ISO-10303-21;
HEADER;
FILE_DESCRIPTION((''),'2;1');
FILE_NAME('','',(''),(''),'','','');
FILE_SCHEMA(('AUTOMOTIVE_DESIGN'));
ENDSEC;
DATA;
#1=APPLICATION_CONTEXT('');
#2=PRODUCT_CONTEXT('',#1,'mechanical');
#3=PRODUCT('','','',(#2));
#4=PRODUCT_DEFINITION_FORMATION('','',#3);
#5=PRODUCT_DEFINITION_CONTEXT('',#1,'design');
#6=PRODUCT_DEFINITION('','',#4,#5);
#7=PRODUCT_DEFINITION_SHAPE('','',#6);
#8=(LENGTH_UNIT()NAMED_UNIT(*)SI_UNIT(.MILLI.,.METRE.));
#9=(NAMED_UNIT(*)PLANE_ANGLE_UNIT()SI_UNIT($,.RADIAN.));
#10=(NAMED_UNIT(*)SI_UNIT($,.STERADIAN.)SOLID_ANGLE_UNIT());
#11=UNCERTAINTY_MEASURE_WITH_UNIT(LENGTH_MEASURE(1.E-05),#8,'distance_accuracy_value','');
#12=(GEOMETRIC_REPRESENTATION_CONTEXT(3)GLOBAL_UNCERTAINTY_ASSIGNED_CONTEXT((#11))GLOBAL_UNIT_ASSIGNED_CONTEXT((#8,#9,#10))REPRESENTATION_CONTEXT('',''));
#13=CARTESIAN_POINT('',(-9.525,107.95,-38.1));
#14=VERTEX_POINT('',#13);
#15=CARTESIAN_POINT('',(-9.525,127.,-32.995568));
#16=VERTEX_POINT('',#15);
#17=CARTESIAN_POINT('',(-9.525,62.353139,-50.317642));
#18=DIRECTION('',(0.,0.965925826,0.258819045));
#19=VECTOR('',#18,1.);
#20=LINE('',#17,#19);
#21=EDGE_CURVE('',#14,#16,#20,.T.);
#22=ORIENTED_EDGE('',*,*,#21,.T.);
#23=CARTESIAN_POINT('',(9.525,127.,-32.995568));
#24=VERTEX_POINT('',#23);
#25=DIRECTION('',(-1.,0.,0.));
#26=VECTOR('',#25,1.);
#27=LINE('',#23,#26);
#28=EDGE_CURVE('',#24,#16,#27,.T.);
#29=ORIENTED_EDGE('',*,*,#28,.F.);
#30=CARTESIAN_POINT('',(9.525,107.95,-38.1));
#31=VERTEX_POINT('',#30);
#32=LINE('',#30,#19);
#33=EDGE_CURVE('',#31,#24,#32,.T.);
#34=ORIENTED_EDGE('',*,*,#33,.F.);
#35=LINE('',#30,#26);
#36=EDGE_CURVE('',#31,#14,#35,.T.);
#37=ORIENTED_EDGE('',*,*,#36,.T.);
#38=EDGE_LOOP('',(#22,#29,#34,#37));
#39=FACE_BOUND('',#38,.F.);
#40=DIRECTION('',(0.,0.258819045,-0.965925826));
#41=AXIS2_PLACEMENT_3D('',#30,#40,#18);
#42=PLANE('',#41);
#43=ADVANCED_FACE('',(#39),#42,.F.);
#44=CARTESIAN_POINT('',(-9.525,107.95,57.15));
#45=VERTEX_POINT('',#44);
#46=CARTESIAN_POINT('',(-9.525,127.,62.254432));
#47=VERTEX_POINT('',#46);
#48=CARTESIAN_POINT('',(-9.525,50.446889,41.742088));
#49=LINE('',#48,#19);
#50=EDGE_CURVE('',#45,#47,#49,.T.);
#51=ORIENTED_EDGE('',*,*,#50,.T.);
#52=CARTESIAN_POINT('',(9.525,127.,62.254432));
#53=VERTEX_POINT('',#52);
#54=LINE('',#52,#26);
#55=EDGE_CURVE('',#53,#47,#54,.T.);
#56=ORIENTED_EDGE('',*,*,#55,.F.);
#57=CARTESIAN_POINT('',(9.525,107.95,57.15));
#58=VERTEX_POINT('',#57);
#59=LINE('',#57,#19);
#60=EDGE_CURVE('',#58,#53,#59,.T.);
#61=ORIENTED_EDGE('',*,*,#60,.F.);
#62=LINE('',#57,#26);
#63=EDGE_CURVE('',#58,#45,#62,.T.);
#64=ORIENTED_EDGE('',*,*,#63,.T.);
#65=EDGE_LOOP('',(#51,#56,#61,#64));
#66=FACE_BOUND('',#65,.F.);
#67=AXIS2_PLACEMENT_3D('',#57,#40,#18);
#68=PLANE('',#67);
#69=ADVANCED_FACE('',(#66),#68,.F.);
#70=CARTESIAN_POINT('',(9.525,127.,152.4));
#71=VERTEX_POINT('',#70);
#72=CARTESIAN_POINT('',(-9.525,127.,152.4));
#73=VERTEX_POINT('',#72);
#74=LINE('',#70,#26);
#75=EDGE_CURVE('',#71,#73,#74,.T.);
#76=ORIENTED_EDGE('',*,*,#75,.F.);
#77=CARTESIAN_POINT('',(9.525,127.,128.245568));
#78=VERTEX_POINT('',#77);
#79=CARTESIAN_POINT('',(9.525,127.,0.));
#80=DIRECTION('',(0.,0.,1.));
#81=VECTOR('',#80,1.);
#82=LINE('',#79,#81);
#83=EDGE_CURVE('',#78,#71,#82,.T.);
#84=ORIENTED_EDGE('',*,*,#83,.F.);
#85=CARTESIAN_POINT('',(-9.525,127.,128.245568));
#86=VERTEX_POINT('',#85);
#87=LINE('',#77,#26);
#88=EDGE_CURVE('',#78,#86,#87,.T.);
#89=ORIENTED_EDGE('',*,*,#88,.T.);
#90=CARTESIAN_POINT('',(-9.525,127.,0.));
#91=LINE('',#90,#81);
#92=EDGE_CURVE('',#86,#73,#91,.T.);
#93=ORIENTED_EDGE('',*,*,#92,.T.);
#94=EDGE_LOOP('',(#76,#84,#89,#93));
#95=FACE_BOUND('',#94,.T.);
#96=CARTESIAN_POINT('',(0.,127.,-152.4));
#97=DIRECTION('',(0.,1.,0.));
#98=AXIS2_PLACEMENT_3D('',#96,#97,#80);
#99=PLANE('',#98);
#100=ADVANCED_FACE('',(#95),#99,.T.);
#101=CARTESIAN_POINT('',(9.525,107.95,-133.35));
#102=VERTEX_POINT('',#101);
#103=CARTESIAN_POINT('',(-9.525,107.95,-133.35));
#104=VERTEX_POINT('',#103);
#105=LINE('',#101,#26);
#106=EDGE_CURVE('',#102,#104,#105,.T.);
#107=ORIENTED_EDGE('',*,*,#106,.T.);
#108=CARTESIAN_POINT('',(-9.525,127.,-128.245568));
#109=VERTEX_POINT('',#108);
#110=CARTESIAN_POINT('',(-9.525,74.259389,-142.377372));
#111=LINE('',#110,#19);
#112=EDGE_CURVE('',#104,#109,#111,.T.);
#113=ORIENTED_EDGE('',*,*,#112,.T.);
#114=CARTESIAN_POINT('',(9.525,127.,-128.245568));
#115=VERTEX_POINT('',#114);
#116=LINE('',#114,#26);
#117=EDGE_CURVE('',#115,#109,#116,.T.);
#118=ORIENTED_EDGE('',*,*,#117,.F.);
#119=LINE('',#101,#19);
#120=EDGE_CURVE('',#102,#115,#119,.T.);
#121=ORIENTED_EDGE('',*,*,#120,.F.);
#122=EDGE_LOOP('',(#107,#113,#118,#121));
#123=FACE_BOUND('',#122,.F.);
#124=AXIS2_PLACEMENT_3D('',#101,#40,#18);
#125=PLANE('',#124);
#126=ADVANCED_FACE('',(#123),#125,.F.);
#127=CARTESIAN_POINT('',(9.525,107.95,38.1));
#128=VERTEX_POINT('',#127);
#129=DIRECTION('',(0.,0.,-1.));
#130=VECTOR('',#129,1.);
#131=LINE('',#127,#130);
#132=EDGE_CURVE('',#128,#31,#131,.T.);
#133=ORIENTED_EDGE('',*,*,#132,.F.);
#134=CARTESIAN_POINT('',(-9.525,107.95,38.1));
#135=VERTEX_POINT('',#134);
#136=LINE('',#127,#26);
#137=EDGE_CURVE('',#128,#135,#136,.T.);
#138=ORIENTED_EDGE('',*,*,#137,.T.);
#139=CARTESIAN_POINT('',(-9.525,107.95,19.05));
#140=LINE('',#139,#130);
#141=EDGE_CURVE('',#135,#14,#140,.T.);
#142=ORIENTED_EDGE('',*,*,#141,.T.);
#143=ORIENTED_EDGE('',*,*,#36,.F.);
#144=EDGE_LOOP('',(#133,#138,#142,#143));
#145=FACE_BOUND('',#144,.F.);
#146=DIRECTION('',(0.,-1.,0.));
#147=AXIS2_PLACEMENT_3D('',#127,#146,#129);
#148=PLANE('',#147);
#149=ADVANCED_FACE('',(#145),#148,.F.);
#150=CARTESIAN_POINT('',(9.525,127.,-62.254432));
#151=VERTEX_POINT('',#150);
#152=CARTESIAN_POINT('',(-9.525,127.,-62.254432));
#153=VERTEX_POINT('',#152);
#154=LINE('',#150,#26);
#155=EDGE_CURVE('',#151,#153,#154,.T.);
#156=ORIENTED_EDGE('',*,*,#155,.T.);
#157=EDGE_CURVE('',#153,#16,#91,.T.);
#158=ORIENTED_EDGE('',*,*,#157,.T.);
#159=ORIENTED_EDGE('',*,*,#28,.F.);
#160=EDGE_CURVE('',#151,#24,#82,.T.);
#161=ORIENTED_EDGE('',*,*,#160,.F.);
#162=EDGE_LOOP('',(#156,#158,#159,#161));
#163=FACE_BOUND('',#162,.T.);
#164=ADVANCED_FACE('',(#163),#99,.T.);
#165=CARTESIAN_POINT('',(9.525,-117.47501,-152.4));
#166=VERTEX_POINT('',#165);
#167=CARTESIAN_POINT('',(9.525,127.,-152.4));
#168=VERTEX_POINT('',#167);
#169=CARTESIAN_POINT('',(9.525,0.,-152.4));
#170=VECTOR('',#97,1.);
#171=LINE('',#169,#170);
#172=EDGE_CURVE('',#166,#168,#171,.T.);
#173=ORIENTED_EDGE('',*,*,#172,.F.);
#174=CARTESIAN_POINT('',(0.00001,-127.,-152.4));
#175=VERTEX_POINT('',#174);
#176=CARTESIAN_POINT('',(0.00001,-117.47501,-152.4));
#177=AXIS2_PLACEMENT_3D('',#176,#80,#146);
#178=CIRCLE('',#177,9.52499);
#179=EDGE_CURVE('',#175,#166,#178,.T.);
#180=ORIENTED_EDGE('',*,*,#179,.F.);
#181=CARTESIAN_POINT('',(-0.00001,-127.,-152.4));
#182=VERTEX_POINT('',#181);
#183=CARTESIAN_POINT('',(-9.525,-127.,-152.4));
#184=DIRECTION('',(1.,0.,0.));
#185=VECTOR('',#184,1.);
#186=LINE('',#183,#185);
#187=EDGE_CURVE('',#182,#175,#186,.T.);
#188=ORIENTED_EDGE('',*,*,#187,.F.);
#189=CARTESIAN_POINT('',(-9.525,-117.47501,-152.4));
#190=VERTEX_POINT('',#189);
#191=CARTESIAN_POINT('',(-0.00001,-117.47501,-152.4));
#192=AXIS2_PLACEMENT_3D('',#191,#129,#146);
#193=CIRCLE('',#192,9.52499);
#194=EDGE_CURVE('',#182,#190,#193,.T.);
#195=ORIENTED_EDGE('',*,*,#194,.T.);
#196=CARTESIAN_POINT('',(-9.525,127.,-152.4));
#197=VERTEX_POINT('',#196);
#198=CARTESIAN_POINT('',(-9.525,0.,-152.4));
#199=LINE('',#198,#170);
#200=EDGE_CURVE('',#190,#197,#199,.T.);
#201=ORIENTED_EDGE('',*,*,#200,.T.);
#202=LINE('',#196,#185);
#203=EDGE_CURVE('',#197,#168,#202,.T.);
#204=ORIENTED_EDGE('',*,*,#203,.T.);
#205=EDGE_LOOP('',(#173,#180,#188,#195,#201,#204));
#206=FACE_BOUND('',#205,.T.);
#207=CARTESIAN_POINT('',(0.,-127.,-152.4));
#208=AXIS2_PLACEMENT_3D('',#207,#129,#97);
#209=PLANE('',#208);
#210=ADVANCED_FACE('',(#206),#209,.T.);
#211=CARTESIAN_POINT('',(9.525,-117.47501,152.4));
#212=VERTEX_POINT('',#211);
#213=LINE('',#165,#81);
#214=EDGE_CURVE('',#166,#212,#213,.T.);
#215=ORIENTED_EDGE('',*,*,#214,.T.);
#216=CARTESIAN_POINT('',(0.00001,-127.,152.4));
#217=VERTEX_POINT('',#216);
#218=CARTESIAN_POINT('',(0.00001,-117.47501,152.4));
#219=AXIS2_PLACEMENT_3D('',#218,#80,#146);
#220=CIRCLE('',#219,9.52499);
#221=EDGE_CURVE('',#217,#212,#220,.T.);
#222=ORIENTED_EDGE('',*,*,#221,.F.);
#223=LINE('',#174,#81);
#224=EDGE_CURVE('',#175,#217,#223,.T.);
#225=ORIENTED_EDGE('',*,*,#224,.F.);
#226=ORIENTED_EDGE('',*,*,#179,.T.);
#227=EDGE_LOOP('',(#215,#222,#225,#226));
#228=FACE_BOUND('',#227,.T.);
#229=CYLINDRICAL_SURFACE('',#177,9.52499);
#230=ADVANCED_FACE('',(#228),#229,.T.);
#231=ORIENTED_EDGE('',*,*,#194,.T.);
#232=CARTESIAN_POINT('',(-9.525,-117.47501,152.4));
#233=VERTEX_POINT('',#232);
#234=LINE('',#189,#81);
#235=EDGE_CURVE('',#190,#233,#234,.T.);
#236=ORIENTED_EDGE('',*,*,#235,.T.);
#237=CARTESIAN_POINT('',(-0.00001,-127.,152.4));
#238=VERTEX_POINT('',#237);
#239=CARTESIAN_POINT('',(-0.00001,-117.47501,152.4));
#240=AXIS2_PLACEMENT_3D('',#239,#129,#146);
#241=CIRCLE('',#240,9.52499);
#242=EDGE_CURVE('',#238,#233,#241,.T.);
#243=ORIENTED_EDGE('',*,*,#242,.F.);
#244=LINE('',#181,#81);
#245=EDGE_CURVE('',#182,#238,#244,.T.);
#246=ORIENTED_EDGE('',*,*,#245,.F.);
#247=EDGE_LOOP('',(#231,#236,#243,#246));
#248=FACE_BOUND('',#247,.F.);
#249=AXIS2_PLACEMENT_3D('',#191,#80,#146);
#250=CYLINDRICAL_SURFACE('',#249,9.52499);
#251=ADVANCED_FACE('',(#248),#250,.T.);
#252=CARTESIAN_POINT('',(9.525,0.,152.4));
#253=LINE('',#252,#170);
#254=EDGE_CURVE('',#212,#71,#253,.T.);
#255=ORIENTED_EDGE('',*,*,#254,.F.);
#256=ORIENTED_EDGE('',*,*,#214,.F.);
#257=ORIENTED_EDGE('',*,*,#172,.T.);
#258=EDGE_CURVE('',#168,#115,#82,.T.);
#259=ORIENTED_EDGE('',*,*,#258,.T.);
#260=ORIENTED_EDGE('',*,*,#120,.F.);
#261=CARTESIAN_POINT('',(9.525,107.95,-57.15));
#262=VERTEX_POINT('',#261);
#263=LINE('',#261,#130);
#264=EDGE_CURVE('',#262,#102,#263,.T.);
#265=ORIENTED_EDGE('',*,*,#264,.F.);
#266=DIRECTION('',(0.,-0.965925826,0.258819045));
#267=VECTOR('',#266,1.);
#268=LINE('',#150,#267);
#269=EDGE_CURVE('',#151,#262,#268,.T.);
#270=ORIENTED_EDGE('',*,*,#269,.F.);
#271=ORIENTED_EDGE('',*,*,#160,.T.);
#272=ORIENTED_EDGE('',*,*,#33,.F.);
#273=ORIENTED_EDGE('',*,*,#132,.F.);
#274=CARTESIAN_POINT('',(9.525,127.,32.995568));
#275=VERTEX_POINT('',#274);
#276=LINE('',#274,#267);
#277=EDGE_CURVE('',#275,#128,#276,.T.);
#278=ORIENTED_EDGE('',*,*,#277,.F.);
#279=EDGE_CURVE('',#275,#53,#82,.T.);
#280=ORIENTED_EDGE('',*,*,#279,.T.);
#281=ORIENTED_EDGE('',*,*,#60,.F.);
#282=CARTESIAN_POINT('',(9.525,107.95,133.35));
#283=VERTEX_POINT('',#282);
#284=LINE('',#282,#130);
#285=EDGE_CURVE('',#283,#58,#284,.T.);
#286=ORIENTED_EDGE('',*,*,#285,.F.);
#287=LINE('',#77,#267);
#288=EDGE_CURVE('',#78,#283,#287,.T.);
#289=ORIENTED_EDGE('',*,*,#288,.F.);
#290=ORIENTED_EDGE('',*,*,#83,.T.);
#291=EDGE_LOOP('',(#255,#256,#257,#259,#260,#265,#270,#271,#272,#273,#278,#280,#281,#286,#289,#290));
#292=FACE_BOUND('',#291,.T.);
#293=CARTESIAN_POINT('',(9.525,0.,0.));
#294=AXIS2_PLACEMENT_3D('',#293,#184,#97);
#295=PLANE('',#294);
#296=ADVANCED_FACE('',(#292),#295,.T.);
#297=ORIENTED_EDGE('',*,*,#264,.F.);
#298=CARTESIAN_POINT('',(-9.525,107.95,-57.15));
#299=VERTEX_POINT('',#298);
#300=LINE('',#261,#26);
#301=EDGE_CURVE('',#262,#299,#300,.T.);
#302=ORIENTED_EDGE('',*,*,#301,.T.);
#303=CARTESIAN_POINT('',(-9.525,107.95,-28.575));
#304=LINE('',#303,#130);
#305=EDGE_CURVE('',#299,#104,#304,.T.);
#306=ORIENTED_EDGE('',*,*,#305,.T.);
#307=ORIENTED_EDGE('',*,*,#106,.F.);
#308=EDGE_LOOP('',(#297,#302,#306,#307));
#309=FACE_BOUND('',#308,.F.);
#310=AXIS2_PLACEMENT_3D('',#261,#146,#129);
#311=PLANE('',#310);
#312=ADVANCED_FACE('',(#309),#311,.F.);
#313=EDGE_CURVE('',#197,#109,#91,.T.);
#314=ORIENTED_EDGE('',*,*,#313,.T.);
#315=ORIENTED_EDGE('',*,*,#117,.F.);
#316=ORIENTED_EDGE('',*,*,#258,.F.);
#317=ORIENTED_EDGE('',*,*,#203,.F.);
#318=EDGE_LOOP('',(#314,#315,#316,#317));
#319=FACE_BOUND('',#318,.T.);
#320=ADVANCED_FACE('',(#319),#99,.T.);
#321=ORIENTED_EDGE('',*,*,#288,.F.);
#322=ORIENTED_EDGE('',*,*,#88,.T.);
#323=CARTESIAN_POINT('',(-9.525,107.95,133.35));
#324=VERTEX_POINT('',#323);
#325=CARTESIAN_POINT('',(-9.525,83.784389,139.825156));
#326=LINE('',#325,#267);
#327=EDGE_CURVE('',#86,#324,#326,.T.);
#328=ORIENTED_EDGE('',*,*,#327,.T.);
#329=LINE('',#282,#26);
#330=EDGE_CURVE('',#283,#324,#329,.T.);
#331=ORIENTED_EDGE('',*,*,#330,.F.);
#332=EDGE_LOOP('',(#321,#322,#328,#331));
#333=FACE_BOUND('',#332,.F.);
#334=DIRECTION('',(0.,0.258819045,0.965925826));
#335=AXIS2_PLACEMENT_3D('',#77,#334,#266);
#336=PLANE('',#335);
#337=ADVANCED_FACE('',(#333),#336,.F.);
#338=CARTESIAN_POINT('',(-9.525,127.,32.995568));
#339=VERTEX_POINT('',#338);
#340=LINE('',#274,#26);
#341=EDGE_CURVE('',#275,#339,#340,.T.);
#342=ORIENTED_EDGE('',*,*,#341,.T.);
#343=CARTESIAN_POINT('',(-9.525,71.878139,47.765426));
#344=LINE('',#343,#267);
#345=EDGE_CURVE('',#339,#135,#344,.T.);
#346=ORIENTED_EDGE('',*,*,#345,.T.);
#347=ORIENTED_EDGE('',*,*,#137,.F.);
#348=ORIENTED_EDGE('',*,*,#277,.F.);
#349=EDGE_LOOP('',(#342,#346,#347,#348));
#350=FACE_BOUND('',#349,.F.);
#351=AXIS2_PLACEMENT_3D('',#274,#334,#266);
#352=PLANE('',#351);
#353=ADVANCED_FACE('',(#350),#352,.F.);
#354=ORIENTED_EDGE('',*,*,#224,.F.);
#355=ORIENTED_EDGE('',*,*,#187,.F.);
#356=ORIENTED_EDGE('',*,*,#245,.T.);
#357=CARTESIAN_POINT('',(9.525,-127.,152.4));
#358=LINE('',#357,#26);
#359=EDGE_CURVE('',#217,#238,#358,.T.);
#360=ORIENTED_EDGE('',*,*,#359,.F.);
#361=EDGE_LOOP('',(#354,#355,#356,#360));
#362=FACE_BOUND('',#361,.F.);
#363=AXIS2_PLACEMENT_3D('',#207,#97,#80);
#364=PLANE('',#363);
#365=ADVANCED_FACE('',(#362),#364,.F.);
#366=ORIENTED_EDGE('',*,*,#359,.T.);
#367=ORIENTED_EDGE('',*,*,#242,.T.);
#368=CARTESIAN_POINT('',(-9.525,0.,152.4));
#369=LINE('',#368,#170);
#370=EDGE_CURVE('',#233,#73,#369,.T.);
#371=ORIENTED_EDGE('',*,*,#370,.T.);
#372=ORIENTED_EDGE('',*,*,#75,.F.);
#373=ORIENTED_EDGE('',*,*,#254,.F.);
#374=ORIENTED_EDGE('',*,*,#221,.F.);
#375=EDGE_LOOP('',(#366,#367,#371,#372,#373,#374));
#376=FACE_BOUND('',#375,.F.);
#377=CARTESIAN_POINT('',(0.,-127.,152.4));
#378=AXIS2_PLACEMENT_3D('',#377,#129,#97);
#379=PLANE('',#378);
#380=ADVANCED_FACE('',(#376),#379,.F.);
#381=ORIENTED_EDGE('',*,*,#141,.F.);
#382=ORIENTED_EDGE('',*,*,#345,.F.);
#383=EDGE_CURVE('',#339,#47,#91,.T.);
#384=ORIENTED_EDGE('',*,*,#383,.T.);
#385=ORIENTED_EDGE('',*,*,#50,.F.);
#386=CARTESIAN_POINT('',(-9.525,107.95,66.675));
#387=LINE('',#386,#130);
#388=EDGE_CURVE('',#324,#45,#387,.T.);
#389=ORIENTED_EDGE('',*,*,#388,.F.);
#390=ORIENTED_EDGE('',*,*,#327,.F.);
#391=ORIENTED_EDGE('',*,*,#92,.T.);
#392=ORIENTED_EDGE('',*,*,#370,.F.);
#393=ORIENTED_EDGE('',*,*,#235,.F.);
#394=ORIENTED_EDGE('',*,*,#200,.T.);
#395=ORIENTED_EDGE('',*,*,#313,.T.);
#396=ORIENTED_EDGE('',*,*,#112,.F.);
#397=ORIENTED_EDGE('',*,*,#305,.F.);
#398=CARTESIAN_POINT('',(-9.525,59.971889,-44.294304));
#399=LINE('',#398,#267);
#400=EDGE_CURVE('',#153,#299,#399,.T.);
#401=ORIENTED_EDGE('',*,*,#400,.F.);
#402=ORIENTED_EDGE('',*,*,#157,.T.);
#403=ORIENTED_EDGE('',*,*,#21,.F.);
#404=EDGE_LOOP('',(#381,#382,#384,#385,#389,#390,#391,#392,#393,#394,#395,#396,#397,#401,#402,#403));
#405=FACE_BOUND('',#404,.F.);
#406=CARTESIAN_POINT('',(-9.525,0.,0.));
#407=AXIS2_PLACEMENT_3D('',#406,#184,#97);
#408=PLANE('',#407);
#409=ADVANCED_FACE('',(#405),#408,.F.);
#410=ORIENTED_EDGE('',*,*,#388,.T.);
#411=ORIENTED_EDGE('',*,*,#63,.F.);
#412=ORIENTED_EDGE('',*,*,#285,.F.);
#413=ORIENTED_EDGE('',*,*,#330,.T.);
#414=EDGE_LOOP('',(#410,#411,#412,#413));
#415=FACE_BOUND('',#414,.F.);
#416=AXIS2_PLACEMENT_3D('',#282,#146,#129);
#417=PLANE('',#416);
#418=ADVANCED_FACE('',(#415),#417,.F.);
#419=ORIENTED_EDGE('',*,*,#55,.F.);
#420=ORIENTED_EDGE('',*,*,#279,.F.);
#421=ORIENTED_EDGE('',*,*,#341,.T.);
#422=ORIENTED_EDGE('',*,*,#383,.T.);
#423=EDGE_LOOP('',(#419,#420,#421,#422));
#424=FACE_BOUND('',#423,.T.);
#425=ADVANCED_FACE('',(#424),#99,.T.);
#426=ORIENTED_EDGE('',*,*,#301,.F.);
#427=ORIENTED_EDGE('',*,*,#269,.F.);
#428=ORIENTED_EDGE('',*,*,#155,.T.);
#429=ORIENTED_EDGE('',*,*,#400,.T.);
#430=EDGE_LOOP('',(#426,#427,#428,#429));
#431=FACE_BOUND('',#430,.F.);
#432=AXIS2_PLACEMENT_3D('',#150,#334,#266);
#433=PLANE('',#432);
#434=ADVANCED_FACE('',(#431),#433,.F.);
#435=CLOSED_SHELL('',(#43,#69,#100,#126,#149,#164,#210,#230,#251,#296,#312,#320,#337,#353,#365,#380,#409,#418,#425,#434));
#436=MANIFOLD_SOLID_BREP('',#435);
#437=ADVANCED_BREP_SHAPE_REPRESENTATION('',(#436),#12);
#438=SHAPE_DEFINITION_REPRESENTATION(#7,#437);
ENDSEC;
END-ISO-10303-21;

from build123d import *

# Parameters (mm, degrees)
F0_W     = 254
F0_H     = 304.8
F1_DEPTH = 9.525
F2_R     = 9.52499
F4_DEPTH = 19.051


# Not quite as in the source:
# - a fillet or chamfer is up to 0.001 mm smaller than in the source, because OpenCascade refuses the exact size
# - a feature names something its author has since deleted; it is built from what else it names


with BuildPart() as f1:
    # F0 (on Right) → F1 (new body, symmetric)
    with BuildSketch(Plane.YZ):
        Rectangle(F0_W, F0_H)
    extrude(amount=F1_DEPTH, both=True)

    # F2 (radius 9.525 in the source; OpenCascade refuses exactly that, so slightly less here)
    f2_edges = [f1.edges().sort_by_distance(p)[0] for p in [
        (9.525, -127, 0),
        (-9.525, -127, 0),
    ]]
    fillet(f2_edges, radius=F2_R)

    # F3 (on face) → F4 (cut, through all)
    with BuildSketch(Plane.YZ.offset(9.525)):
        Polygon((107.95, 57.15), (127, 62.2544321158), (127, 128.2455678842), (107.95, 133.35), align=None)
        Polygon((127, -32.9955678842), (127, 32.9955678842), (107.95, 38.1), (107.95, -38.1), align=None)
        Polygon((127, -128.2455678842), (127, -62.2544321158), (107.95, -57.15), (107.95, -133.35), align=None)
    extrude(amount=-F4_DEPTH, mode=Mode.SUBTRACT)


solid = f1.part
